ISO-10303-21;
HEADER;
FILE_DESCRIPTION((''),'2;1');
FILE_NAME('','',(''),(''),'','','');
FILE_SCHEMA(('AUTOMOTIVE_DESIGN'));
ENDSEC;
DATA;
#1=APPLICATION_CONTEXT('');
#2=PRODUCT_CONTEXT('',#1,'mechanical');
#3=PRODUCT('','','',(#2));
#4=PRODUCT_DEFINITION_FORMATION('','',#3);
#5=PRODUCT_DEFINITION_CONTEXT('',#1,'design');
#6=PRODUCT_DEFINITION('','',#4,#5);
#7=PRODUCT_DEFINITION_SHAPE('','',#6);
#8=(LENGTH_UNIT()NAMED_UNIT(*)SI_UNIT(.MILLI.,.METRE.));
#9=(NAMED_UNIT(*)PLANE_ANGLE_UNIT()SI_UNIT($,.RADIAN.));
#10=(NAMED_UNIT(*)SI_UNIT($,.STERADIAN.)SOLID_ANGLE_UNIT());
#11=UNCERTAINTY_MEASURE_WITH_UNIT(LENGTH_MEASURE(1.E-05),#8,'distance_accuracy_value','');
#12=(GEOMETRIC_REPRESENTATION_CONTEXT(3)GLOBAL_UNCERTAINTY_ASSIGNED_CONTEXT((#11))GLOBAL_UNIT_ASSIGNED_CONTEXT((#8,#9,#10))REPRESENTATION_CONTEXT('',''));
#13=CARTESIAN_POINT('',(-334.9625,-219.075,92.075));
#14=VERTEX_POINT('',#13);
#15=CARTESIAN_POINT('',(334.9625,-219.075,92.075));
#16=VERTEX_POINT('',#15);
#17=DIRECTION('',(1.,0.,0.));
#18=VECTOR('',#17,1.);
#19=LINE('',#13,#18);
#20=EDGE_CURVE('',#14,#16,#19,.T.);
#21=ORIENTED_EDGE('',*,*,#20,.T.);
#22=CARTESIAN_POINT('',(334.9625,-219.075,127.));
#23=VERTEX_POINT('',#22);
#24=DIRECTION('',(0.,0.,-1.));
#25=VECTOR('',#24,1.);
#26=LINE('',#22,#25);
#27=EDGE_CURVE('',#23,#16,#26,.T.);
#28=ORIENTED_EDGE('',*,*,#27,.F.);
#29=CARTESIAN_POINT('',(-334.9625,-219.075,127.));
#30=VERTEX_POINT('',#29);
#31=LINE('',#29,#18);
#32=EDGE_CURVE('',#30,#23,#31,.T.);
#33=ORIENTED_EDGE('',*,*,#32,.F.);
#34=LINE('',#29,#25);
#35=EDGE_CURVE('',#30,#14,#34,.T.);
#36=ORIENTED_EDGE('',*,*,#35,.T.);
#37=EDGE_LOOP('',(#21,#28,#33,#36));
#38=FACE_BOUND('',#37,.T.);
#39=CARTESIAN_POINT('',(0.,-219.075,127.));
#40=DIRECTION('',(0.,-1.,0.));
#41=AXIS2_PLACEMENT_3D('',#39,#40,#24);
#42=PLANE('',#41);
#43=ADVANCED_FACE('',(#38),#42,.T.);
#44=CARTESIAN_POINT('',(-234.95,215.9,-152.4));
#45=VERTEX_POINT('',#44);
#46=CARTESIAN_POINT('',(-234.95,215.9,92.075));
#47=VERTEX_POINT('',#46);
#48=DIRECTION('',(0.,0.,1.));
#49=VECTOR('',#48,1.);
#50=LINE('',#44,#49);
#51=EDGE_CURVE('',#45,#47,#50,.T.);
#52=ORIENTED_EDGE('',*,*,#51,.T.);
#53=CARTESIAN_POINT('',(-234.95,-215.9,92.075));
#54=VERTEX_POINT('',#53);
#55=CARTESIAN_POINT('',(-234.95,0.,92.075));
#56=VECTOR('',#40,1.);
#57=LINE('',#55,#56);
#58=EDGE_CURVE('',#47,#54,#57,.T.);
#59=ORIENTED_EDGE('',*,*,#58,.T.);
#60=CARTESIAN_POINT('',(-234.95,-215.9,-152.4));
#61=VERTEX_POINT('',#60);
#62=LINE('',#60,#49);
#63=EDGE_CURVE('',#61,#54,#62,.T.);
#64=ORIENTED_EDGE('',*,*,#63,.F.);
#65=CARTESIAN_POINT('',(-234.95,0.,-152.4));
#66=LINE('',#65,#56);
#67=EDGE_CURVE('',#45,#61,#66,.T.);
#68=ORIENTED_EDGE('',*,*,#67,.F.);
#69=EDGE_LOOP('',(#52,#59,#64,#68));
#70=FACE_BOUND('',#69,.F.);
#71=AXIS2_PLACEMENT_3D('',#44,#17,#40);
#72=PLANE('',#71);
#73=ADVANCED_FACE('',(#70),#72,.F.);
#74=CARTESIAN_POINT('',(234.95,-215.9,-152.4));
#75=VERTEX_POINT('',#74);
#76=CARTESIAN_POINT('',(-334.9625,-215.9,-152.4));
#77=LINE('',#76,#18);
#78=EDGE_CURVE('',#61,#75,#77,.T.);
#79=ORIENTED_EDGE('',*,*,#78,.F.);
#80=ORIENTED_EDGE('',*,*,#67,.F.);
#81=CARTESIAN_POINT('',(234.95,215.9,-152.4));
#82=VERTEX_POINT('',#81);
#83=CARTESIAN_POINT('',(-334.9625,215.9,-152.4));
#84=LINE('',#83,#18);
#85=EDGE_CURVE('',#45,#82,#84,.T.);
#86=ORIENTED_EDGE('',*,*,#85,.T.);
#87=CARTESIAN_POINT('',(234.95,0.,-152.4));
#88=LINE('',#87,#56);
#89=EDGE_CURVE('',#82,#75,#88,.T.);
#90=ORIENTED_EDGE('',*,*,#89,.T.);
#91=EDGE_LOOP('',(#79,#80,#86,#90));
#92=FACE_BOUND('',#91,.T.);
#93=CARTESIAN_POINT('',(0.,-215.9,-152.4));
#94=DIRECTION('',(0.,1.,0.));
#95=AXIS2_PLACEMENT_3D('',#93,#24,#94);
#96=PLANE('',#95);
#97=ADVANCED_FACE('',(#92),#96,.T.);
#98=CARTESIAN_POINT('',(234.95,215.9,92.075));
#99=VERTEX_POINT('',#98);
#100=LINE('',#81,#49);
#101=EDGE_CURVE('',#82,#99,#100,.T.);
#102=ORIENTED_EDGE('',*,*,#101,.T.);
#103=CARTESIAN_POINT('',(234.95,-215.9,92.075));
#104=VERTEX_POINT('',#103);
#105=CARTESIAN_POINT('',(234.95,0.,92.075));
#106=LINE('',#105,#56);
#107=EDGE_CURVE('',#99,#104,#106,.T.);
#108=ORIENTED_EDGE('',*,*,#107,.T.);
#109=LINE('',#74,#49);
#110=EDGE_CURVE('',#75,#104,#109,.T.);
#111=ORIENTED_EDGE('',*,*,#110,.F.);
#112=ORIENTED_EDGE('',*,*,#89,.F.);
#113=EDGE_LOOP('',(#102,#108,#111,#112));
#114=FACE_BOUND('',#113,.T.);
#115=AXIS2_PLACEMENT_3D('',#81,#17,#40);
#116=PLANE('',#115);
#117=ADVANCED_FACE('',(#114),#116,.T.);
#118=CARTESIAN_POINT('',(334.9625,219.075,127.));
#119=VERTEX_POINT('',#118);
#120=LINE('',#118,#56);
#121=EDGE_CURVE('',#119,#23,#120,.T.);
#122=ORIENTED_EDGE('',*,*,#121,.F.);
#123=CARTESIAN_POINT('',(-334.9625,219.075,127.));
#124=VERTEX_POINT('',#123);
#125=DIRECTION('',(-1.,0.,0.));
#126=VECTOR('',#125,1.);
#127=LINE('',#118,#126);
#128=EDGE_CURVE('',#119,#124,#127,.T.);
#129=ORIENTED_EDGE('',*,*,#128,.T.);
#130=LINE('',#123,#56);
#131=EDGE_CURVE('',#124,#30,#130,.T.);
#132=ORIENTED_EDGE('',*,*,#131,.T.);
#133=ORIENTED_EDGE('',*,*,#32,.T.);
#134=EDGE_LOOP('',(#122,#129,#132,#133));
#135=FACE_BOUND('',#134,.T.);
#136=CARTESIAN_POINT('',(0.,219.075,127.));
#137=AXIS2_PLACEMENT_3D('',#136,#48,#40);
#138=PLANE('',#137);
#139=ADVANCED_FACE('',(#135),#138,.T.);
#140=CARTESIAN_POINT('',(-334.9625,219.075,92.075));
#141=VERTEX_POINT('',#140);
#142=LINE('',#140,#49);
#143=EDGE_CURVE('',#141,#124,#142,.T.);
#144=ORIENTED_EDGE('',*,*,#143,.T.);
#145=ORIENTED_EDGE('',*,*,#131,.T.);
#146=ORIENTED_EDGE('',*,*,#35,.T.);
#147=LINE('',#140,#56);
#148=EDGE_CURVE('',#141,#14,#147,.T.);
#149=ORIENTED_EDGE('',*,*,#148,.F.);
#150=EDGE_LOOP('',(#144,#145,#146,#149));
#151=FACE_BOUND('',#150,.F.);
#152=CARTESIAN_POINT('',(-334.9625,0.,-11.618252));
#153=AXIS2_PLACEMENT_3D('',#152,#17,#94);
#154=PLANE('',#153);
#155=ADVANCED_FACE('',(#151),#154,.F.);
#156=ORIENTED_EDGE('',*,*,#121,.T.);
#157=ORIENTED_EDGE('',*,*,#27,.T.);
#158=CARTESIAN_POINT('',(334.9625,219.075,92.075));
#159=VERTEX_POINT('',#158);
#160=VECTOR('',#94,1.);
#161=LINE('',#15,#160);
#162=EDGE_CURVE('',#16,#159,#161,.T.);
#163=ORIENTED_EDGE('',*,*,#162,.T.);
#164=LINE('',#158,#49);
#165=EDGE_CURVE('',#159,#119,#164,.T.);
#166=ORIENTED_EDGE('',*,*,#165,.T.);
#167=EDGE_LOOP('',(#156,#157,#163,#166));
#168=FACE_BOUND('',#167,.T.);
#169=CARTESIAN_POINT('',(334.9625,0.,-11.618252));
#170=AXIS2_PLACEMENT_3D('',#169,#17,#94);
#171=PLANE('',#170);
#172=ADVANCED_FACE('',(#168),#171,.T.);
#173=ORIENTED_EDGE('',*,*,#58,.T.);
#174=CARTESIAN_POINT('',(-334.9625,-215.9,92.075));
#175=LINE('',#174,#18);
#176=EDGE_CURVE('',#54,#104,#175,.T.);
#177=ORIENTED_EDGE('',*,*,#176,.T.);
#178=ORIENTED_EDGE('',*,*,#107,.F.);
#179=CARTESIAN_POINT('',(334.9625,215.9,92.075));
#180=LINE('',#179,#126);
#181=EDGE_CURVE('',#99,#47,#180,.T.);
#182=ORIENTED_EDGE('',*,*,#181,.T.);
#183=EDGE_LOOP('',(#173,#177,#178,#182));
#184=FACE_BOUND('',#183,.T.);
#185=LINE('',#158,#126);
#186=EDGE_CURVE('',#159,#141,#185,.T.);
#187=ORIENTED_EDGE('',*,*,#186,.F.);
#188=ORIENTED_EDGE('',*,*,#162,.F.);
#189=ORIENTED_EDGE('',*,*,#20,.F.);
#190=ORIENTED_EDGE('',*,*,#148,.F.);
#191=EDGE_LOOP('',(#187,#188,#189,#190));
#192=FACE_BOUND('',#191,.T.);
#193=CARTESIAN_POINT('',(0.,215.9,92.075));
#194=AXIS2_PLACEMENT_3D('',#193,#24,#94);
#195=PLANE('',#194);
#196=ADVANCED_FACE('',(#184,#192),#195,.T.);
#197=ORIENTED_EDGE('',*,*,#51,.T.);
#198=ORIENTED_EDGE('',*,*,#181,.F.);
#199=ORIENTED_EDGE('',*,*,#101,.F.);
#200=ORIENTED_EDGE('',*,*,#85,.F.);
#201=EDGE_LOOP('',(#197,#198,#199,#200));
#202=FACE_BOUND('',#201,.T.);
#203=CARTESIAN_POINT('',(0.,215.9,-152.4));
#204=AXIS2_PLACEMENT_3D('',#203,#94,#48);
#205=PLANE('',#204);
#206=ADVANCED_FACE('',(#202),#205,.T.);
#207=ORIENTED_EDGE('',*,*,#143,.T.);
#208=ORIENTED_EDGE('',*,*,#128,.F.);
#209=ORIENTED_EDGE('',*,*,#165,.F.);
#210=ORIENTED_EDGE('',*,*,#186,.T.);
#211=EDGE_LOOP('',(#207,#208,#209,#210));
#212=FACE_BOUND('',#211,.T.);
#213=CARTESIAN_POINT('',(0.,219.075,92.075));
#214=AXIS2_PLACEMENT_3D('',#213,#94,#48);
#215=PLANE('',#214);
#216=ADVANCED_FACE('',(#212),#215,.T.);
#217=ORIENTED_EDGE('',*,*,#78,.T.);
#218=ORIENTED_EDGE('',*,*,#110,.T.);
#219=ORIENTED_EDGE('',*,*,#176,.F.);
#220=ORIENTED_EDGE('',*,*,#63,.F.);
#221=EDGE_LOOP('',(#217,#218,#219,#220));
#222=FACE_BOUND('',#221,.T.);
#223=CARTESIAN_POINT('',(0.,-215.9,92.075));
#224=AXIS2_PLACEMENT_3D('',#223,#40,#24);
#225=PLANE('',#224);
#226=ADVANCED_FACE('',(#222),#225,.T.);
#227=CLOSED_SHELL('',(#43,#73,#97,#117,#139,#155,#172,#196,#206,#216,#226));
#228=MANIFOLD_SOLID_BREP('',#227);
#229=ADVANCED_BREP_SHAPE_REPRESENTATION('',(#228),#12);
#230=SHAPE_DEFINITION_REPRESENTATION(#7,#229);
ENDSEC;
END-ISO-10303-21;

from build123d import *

# Parameters (mm, degrees)
F1_DEPTH      = 334.9625
F1_DEPTH_BACK = 334.9625
F2_W          = 100.0125
F2_H          = 431.8
F3_DEPTH      = 244.475


# Not quite as in the source:
# - a length typed as a fraction of an inch, garbled in the dataset ("3 / 203.2 mm" for 3/8 in), is restored


with BuildPart() as f1:
    # F0 (on Right) → F1 (new body, two sides)
    with BuildSketch(Plane.YZ) as f1_sk:
        Polygon((219.075, 127), (-219.075, 127), (-219.075, 92.075), (-215.9, 92.075), (-215.9, -152.4), (215.9, -152.4), (215.9, 92.075), (219.075, 92.075), align=None)
    extrude(amount=F1_DEPTH)
    extrude(f1_sk.sketch, amount=-F1_DEPTH_BACK)

    # F2 (on face) → F3 (cut, through all)
    with BuildSketch(Plane(origin=(0, 0, -152.4), x_dir=(1, 0, 0), z_dir=(0, 0, -1))):
        with Locations((-284.95625, 0)):
            Rectangle(F2_W, F2_H)
        with Locations((284.95625, 0)):
            Rectangle(F2_W, F2_H)
    extrude(amount=-F3_DEPTH, mode=Mode.SUBTRACT)


solid = f1.part
